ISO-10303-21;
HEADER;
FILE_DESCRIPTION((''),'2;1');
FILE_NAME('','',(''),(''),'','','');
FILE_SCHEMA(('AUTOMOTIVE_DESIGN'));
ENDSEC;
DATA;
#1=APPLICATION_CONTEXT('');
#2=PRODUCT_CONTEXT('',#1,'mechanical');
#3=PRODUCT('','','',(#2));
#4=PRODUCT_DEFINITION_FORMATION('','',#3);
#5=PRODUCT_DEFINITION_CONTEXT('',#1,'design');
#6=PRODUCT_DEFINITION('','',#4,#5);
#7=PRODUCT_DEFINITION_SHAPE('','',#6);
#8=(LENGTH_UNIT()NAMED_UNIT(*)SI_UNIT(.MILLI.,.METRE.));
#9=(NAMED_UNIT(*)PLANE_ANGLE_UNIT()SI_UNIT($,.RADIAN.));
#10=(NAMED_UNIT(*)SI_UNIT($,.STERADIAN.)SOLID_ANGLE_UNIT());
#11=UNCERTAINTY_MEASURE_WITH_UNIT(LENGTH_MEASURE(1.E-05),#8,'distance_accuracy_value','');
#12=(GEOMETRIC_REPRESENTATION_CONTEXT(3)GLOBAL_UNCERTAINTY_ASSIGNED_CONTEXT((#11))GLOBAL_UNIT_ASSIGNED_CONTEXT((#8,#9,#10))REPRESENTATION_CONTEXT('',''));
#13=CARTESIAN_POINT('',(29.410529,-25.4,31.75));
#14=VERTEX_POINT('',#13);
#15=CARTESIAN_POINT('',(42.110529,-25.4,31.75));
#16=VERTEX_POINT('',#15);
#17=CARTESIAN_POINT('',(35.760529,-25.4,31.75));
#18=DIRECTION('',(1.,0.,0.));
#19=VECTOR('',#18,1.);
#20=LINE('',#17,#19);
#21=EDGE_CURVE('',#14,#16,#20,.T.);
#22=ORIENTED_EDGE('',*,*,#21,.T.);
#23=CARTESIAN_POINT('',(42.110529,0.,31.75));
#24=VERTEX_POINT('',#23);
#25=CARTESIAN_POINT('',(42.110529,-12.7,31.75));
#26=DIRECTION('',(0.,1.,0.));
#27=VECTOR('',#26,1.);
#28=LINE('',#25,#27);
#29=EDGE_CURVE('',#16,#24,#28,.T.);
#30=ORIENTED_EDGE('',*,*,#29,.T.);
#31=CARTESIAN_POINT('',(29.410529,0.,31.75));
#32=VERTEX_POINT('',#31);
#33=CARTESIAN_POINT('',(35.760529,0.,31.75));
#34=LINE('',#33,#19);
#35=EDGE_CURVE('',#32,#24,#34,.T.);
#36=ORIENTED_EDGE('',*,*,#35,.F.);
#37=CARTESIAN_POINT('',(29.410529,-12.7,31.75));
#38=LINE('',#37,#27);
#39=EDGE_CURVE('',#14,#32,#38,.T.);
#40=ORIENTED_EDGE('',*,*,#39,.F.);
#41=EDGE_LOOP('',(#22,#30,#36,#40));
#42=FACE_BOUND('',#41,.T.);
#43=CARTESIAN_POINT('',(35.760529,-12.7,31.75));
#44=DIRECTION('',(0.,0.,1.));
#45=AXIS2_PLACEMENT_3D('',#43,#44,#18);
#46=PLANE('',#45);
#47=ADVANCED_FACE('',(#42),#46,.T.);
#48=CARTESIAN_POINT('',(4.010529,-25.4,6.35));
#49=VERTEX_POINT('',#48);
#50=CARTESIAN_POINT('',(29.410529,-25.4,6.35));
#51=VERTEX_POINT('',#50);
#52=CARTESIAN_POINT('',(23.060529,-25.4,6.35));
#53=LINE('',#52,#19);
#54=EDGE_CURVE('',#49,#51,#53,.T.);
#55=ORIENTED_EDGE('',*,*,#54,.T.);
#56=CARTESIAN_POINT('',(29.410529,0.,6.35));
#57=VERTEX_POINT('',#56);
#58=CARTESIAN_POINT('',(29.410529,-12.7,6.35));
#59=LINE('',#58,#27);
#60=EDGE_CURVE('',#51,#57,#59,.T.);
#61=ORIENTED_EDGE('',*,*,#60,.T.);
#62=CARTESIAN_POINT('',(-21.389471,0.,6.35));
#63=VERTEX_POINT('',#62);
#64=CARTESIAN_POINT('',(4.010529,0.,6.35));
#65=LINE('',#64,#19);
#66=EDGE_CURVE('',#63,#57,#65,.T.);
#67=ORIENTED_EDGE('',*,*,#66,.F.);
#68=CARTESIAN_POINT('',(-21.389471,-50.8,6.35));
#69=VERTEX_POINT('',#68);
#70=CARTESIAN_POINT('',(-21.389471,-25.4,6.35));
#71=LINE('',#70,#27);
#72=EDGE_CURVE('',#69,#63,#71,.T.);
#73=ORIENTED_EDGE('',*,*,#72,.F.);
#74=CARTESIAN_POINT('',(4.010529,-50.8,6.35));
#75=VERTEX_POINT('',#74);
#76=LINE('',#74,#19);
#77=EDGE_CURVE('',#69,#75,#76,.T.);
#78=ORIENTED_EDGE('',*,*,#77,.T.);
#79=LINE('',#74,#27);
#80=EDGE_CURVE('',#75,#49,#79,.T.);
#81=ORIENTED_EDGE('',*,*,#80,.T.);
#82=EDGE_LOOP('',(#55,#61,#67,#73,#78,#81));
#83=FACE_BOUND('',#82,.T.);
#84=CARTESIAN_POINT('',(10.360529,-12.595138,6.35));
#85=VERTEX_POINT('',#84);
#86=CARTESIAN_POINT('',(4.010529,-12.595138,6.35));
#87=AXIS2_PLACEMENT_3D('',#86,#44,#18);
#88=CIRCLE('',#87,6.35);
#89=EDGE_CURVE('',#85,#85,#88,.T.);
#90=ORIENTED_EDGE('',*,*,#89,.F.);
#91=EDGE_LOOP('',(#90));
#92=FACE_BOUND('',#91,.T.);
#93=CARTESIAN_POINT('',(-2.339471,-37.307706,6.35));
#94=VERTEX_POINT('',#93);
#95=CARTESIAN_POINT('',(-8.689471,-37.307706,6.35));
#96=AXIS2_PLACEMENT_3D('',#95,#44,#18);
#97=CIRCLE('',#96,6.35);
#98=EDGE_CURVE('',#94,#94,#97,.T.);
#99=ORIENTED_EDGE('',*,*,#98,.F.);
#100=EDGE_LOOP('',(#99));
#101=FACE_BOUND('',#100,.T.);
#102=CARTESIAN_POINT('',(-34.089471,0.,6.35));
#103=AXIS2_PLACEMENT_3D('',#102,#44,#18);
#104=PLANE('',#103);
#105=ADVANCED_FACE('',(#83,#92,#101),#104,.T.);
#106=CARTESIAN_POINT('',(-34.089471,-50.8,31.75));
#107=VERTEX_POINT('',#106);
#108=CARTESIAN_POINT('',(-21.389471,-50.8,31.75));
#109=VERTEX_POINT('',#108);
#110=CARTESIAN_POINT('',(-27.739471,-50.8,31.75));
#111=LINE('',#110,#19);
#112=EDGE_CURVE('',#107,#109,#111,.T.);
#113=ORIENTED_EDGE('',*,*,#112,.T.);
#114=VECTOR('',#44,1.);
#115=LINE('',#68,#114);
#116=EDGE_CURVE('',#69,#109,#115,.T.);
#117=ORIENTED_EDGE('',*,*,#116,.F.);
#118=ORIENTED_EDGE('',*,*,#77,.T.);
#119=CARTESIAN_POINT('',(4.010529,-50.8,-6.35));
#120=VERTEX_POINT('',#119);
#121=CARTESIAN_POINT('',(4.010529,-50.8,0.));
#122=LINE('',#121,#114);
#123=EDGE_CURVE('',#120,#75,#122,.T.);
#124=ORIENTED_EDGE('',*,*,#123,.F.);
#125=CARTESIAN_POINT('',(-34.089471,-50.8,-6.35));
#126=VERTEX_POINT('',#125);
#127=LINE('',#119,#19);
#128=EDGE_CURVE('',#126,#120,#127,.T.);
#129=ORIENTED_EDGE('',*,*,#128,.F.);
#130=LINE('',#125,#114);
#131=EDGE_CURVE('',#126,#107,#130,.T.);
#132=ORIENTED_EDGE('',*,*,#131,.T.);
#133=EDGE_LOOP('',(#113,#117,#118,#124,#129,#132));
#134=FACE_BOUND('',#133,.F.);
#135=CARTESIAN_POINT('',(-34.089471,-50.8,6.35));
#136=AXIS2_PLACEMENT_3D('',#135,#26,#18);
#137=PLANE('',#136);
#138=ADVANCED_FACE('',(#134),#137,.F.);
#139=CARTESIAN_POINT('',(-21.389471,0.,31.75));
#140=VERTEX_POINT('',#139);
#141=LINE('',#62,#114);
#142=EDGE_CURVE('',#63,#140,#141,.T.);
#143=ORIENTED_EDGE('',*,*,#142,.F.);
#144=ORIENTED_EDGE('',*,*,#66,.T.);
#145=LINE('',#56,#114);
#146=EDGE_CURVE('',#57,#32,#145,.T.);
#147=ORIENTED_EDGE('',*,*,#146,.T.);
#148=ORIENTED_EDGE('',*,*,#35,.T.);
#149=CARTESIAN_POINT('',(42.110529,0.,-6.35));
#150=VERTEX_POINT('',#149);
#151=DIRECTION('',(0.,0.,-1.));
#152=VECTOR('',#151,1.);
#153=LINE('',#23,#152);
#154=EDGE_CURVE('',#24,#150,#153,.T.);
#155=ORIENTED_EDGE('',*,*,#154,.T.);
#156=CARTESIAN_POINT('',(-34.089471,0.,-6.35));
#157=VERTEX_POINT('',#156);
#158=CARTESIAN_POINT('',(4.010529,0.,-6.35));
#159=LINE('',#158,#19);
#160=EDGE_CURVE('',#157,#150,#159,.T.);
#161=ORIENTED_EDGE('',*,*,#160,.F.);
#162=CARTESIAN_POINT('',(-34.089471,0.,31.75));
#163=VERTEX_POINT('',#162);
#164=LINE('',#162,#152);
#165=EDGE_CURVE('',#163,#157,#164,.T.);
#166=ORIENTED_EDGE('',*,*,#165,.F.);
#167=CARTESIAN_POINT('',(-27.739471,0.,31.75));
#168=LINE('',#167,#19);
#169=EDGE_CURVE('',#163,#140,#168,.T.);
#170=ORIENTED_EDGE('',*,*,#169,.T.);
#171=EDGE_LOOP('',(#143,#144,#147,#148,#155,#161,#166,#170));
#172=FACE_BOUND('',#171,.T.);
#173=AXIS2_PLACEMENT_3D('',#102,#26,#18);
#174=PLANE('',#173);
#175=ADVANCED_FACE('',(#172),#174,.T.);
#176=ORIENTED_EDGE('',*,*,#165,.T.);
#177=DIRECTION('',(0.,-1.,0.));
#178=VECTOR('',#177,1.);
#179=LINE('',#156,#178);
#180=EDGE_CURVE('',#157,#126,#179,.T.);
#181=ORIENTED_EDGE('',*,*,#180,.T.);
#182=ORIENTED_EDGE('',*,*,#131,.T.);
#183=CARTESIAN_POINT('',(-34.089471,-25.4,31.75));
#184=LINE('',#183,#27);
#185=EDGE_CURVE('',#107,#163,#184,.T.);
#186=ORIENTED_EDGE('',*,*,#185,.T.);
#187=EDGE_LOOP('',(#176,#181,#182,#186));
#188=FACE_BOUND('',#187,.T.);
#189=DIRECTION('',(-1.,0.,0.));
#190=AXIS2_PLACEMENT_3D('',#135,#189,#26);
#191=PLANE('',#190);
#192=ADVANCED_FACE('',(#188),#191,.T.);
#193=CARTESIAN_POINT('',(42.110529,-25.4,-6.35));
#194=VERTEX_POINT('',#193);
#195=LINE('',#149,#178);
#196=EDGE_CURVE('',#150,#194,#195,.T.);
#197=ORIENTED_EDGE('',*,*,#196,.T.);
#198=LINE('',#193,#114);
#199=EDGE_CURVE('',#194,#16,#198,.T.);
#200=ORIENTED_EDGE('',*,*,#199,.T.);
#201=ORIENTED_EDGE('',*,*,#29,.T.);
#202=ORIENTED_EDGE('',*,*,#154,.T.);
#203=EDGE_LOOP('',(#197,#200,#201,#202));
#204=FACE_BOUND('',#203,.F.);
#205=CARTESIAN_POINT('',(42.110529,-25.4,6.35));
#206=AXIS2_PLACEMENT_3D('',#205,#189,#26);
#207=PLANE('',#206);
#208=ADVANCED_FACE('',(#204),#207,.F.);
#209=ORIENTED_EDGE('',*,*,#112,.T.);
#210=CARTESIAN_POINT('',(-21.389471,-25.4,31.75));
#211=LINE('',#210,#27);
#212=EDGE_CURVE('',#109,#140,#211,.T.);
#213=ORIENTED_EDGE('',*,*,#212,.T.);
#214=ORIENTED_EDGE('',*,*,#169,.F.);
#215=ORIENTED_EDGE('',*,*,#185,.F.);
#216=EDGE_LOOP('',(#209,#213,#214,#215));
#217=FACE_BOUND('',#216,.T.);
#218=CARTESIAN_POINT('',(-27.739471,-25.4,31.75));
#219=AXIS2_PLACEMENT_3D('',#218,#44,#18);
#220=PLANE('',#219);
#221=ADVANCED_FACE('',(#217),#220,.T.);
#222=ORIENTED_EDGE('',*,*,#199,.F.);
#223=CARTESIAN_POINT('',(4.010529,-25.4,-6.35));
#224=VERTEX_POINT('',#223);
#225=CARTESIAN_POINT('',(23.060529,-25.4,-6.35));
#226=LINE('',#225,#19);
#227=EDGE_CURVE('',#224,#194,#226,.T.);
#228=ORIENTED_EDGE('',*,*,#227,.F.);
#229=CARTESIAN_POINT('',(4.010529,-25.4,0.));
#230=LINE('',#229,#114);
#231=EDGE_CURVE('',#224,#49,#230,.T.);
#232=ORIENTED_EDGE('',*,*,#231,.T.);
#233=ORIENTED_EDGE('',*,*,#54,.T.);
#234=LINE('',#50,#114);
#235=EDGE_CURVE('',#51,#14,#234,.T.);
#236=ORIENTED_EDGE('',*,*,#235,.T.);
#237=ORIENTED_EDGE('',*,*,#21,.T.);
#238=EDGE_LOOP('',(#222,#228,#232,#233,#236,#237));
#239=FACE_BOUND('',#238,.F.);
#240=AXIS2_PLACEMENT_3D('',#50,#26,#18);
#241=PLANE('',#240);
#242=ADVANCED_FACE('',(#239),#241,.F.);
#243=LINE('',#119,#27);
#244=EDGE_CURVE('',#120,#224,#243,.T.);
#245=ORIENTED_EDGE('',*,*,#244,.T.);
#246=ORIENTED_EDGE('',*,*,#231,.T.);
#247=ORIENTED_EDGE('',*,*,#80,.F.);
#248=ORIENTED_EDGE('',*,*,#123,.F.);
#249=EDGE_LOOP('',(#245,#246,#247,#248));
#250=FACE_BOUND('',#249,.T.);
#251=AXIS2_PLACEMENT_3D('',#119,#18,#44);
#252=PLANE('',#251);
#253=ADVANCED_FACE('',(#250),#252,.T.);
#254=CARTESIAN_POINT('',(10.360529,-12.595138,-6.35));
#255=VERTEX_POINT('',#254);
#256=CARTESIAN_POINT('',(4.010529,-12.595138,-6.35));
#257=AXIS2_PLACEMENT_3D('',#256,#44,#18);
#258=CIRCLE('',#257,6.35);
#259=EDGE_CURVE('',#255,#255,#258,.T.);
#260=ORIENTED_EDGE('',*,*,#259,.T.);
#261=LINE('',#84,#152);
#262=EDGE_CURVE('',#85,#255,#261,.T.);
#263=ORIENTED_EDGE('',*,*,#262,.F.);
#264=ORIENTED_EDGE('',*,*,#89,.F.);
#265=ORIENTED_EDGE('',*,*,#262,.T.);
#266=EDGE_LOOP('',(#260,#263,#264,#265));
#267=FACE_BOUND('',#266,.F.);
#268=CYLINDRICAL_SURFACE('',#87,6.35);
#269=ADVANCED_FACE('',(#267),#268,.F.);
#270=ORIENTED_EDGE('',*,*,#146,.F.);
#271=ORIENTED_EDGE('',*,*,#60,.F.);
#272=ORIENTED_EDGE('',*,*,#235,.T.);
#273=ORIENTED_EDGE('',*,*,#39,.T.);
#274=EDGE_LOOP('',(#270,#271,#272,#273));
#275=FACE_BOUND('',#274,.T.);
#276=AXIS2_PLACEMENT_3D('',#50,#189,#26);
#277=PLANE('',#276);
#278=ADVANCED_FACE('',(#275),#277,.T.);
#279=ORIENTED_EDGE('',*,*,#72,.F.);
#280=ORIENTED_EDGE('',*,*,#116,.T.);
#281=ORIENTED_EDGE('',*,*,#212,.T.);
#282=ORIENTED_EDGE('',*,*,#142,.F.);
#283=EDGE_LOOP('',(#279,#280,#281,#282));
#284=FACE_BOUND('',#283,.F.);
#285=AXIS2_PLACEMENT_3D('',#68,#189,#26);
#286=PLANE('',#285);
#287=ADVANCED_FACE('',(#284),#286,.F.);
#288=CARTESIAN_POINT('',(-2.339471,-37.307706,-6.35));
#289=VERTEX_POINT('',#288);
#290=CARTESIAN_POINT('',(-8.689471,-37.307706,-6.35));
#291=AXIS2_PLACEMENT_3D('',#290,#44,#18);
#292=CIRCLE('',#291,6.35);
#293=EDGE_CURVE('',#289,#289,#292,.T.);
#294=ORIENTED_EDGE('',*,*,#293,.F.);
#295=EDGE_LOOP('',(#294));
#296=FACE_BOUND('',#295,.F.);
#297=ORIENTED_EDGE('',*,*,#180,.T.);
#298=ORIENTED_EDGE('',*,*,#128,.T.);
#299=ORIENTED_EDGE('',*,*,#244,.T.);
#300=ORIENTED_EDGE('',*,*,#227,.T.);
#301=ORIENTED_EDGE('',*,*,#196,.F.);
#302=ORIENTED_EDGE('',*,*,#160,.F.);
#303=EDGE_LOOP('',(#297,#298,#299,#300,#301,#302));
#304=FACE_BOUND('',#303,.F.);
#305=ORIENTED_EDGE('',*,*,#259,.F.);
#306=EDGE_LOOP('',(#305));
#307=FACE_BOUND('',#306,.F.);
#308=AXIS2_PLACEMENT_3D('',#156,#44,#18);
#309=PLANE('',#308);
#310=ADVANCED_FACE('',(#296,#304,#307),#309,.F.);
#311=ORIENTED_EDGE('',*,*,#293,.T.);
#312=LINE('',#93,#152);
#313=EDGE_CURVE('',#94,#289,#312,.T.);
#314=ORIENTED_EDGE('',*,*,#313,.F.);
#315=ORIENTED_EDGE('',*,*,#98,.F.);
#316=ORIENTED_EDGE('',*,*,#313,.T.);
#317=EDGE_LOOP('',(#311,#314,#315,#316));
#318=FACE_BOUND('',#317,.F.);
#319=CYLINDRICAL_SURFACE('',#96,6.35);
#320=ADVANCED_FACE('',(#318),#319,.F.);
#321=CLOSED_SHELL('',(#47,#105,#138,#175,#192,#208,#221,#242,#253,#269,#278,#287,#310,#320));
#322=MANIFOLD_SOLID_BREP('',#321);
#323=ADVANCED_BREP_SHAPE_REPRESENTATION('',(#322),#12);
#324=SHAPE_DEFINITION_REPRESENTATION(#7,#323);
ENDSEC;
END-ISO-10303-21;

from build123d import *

# Parameters (mm, degrees)
F0_W      = 76.2
F0_H      = 12.7
F1_DEPTH  = 25.4
F3_DEPTH  = 50.8
F4_W      = 38.1
F4_H      = 12.7
F5_DEPTH  = 25.4
F6_W      = 12.7
F6_H      = 25.4
F7_DEPTH  = 25.4
F8_W      = 12.7
F8_H      = 50.8
F9_DEPTH  = 25.4
F10_R     = 6.35
F11_DEPTH = 25.4
F12_R     = 6.35
F13_DEPTH = 25.4


# Not quite as in the source:
# - a feature of the source that left no trace in its solid (it failed there, or was rolled back) is left out


with BuildPart() as f1:
    # F0 (on Front) → F1 (new body)
    with BuildSketch(Plane.XZ):
        with Locations((4.0105291711, 0)):
            Rectangle(F0_W, F0_H)
    extrude(amount=F1_DEPTH)

    # F0 (on Front) → F3 (join)
    with BuildSketch(Plane.XZ):
        with Locations((4.0105291711, 0)):
            Rectangle(F0_W, F0_H)
    extrude(amount=F3_DEPTH)

    # F4 (on face) → F5 (cut)
    with BuildSketch(Plane.XZ.offset(50.8)):
        with Locations((23.0605291711, 0)):
            Rectangle(F4_W, F4_H)
    extrude(amount=-F5_DEPTH, mode=Mode.SUBTRACT)

    # F6 (on face) → F7 (join)
    with BuildSketch(Plane.XY.offset(6.35)):
        with Locations((35.7605291711, -12.7)):
            Rectangle(F6_W, F6_H)
    extrude(amount=F7_DEPTH)

    # F8 (on face) → F9 (join)
    with BuildSketch(Plane.XY.offset(6.35)):
        with Locations((-27.7394708289, -25.4)):
            Rectangle(F8_W, F8_H)
    extrude(amount=F9_DEPTH)

    # F10 (on face) → F11 (cut)
    with BuildSketch(Plane.XY.offset(6.35)):
        with Locations((-8.6894708289, -37.3077057302)):
            Circle(F10_R)
    extrude(amount=-F11_DEPTH, mode=Mode.SUBTRACT)

    # F12 (on face) → F13 (cut)
    with BuildSketch(Plane.XY.offset(6.35)):
        with Locations((4.0105291711, -12.5951375812)):
            Circle(F12_R)
    extrude(amount=-F13_DEPTH, mode=Mode.SUBTRACT)


solid = f1.part
